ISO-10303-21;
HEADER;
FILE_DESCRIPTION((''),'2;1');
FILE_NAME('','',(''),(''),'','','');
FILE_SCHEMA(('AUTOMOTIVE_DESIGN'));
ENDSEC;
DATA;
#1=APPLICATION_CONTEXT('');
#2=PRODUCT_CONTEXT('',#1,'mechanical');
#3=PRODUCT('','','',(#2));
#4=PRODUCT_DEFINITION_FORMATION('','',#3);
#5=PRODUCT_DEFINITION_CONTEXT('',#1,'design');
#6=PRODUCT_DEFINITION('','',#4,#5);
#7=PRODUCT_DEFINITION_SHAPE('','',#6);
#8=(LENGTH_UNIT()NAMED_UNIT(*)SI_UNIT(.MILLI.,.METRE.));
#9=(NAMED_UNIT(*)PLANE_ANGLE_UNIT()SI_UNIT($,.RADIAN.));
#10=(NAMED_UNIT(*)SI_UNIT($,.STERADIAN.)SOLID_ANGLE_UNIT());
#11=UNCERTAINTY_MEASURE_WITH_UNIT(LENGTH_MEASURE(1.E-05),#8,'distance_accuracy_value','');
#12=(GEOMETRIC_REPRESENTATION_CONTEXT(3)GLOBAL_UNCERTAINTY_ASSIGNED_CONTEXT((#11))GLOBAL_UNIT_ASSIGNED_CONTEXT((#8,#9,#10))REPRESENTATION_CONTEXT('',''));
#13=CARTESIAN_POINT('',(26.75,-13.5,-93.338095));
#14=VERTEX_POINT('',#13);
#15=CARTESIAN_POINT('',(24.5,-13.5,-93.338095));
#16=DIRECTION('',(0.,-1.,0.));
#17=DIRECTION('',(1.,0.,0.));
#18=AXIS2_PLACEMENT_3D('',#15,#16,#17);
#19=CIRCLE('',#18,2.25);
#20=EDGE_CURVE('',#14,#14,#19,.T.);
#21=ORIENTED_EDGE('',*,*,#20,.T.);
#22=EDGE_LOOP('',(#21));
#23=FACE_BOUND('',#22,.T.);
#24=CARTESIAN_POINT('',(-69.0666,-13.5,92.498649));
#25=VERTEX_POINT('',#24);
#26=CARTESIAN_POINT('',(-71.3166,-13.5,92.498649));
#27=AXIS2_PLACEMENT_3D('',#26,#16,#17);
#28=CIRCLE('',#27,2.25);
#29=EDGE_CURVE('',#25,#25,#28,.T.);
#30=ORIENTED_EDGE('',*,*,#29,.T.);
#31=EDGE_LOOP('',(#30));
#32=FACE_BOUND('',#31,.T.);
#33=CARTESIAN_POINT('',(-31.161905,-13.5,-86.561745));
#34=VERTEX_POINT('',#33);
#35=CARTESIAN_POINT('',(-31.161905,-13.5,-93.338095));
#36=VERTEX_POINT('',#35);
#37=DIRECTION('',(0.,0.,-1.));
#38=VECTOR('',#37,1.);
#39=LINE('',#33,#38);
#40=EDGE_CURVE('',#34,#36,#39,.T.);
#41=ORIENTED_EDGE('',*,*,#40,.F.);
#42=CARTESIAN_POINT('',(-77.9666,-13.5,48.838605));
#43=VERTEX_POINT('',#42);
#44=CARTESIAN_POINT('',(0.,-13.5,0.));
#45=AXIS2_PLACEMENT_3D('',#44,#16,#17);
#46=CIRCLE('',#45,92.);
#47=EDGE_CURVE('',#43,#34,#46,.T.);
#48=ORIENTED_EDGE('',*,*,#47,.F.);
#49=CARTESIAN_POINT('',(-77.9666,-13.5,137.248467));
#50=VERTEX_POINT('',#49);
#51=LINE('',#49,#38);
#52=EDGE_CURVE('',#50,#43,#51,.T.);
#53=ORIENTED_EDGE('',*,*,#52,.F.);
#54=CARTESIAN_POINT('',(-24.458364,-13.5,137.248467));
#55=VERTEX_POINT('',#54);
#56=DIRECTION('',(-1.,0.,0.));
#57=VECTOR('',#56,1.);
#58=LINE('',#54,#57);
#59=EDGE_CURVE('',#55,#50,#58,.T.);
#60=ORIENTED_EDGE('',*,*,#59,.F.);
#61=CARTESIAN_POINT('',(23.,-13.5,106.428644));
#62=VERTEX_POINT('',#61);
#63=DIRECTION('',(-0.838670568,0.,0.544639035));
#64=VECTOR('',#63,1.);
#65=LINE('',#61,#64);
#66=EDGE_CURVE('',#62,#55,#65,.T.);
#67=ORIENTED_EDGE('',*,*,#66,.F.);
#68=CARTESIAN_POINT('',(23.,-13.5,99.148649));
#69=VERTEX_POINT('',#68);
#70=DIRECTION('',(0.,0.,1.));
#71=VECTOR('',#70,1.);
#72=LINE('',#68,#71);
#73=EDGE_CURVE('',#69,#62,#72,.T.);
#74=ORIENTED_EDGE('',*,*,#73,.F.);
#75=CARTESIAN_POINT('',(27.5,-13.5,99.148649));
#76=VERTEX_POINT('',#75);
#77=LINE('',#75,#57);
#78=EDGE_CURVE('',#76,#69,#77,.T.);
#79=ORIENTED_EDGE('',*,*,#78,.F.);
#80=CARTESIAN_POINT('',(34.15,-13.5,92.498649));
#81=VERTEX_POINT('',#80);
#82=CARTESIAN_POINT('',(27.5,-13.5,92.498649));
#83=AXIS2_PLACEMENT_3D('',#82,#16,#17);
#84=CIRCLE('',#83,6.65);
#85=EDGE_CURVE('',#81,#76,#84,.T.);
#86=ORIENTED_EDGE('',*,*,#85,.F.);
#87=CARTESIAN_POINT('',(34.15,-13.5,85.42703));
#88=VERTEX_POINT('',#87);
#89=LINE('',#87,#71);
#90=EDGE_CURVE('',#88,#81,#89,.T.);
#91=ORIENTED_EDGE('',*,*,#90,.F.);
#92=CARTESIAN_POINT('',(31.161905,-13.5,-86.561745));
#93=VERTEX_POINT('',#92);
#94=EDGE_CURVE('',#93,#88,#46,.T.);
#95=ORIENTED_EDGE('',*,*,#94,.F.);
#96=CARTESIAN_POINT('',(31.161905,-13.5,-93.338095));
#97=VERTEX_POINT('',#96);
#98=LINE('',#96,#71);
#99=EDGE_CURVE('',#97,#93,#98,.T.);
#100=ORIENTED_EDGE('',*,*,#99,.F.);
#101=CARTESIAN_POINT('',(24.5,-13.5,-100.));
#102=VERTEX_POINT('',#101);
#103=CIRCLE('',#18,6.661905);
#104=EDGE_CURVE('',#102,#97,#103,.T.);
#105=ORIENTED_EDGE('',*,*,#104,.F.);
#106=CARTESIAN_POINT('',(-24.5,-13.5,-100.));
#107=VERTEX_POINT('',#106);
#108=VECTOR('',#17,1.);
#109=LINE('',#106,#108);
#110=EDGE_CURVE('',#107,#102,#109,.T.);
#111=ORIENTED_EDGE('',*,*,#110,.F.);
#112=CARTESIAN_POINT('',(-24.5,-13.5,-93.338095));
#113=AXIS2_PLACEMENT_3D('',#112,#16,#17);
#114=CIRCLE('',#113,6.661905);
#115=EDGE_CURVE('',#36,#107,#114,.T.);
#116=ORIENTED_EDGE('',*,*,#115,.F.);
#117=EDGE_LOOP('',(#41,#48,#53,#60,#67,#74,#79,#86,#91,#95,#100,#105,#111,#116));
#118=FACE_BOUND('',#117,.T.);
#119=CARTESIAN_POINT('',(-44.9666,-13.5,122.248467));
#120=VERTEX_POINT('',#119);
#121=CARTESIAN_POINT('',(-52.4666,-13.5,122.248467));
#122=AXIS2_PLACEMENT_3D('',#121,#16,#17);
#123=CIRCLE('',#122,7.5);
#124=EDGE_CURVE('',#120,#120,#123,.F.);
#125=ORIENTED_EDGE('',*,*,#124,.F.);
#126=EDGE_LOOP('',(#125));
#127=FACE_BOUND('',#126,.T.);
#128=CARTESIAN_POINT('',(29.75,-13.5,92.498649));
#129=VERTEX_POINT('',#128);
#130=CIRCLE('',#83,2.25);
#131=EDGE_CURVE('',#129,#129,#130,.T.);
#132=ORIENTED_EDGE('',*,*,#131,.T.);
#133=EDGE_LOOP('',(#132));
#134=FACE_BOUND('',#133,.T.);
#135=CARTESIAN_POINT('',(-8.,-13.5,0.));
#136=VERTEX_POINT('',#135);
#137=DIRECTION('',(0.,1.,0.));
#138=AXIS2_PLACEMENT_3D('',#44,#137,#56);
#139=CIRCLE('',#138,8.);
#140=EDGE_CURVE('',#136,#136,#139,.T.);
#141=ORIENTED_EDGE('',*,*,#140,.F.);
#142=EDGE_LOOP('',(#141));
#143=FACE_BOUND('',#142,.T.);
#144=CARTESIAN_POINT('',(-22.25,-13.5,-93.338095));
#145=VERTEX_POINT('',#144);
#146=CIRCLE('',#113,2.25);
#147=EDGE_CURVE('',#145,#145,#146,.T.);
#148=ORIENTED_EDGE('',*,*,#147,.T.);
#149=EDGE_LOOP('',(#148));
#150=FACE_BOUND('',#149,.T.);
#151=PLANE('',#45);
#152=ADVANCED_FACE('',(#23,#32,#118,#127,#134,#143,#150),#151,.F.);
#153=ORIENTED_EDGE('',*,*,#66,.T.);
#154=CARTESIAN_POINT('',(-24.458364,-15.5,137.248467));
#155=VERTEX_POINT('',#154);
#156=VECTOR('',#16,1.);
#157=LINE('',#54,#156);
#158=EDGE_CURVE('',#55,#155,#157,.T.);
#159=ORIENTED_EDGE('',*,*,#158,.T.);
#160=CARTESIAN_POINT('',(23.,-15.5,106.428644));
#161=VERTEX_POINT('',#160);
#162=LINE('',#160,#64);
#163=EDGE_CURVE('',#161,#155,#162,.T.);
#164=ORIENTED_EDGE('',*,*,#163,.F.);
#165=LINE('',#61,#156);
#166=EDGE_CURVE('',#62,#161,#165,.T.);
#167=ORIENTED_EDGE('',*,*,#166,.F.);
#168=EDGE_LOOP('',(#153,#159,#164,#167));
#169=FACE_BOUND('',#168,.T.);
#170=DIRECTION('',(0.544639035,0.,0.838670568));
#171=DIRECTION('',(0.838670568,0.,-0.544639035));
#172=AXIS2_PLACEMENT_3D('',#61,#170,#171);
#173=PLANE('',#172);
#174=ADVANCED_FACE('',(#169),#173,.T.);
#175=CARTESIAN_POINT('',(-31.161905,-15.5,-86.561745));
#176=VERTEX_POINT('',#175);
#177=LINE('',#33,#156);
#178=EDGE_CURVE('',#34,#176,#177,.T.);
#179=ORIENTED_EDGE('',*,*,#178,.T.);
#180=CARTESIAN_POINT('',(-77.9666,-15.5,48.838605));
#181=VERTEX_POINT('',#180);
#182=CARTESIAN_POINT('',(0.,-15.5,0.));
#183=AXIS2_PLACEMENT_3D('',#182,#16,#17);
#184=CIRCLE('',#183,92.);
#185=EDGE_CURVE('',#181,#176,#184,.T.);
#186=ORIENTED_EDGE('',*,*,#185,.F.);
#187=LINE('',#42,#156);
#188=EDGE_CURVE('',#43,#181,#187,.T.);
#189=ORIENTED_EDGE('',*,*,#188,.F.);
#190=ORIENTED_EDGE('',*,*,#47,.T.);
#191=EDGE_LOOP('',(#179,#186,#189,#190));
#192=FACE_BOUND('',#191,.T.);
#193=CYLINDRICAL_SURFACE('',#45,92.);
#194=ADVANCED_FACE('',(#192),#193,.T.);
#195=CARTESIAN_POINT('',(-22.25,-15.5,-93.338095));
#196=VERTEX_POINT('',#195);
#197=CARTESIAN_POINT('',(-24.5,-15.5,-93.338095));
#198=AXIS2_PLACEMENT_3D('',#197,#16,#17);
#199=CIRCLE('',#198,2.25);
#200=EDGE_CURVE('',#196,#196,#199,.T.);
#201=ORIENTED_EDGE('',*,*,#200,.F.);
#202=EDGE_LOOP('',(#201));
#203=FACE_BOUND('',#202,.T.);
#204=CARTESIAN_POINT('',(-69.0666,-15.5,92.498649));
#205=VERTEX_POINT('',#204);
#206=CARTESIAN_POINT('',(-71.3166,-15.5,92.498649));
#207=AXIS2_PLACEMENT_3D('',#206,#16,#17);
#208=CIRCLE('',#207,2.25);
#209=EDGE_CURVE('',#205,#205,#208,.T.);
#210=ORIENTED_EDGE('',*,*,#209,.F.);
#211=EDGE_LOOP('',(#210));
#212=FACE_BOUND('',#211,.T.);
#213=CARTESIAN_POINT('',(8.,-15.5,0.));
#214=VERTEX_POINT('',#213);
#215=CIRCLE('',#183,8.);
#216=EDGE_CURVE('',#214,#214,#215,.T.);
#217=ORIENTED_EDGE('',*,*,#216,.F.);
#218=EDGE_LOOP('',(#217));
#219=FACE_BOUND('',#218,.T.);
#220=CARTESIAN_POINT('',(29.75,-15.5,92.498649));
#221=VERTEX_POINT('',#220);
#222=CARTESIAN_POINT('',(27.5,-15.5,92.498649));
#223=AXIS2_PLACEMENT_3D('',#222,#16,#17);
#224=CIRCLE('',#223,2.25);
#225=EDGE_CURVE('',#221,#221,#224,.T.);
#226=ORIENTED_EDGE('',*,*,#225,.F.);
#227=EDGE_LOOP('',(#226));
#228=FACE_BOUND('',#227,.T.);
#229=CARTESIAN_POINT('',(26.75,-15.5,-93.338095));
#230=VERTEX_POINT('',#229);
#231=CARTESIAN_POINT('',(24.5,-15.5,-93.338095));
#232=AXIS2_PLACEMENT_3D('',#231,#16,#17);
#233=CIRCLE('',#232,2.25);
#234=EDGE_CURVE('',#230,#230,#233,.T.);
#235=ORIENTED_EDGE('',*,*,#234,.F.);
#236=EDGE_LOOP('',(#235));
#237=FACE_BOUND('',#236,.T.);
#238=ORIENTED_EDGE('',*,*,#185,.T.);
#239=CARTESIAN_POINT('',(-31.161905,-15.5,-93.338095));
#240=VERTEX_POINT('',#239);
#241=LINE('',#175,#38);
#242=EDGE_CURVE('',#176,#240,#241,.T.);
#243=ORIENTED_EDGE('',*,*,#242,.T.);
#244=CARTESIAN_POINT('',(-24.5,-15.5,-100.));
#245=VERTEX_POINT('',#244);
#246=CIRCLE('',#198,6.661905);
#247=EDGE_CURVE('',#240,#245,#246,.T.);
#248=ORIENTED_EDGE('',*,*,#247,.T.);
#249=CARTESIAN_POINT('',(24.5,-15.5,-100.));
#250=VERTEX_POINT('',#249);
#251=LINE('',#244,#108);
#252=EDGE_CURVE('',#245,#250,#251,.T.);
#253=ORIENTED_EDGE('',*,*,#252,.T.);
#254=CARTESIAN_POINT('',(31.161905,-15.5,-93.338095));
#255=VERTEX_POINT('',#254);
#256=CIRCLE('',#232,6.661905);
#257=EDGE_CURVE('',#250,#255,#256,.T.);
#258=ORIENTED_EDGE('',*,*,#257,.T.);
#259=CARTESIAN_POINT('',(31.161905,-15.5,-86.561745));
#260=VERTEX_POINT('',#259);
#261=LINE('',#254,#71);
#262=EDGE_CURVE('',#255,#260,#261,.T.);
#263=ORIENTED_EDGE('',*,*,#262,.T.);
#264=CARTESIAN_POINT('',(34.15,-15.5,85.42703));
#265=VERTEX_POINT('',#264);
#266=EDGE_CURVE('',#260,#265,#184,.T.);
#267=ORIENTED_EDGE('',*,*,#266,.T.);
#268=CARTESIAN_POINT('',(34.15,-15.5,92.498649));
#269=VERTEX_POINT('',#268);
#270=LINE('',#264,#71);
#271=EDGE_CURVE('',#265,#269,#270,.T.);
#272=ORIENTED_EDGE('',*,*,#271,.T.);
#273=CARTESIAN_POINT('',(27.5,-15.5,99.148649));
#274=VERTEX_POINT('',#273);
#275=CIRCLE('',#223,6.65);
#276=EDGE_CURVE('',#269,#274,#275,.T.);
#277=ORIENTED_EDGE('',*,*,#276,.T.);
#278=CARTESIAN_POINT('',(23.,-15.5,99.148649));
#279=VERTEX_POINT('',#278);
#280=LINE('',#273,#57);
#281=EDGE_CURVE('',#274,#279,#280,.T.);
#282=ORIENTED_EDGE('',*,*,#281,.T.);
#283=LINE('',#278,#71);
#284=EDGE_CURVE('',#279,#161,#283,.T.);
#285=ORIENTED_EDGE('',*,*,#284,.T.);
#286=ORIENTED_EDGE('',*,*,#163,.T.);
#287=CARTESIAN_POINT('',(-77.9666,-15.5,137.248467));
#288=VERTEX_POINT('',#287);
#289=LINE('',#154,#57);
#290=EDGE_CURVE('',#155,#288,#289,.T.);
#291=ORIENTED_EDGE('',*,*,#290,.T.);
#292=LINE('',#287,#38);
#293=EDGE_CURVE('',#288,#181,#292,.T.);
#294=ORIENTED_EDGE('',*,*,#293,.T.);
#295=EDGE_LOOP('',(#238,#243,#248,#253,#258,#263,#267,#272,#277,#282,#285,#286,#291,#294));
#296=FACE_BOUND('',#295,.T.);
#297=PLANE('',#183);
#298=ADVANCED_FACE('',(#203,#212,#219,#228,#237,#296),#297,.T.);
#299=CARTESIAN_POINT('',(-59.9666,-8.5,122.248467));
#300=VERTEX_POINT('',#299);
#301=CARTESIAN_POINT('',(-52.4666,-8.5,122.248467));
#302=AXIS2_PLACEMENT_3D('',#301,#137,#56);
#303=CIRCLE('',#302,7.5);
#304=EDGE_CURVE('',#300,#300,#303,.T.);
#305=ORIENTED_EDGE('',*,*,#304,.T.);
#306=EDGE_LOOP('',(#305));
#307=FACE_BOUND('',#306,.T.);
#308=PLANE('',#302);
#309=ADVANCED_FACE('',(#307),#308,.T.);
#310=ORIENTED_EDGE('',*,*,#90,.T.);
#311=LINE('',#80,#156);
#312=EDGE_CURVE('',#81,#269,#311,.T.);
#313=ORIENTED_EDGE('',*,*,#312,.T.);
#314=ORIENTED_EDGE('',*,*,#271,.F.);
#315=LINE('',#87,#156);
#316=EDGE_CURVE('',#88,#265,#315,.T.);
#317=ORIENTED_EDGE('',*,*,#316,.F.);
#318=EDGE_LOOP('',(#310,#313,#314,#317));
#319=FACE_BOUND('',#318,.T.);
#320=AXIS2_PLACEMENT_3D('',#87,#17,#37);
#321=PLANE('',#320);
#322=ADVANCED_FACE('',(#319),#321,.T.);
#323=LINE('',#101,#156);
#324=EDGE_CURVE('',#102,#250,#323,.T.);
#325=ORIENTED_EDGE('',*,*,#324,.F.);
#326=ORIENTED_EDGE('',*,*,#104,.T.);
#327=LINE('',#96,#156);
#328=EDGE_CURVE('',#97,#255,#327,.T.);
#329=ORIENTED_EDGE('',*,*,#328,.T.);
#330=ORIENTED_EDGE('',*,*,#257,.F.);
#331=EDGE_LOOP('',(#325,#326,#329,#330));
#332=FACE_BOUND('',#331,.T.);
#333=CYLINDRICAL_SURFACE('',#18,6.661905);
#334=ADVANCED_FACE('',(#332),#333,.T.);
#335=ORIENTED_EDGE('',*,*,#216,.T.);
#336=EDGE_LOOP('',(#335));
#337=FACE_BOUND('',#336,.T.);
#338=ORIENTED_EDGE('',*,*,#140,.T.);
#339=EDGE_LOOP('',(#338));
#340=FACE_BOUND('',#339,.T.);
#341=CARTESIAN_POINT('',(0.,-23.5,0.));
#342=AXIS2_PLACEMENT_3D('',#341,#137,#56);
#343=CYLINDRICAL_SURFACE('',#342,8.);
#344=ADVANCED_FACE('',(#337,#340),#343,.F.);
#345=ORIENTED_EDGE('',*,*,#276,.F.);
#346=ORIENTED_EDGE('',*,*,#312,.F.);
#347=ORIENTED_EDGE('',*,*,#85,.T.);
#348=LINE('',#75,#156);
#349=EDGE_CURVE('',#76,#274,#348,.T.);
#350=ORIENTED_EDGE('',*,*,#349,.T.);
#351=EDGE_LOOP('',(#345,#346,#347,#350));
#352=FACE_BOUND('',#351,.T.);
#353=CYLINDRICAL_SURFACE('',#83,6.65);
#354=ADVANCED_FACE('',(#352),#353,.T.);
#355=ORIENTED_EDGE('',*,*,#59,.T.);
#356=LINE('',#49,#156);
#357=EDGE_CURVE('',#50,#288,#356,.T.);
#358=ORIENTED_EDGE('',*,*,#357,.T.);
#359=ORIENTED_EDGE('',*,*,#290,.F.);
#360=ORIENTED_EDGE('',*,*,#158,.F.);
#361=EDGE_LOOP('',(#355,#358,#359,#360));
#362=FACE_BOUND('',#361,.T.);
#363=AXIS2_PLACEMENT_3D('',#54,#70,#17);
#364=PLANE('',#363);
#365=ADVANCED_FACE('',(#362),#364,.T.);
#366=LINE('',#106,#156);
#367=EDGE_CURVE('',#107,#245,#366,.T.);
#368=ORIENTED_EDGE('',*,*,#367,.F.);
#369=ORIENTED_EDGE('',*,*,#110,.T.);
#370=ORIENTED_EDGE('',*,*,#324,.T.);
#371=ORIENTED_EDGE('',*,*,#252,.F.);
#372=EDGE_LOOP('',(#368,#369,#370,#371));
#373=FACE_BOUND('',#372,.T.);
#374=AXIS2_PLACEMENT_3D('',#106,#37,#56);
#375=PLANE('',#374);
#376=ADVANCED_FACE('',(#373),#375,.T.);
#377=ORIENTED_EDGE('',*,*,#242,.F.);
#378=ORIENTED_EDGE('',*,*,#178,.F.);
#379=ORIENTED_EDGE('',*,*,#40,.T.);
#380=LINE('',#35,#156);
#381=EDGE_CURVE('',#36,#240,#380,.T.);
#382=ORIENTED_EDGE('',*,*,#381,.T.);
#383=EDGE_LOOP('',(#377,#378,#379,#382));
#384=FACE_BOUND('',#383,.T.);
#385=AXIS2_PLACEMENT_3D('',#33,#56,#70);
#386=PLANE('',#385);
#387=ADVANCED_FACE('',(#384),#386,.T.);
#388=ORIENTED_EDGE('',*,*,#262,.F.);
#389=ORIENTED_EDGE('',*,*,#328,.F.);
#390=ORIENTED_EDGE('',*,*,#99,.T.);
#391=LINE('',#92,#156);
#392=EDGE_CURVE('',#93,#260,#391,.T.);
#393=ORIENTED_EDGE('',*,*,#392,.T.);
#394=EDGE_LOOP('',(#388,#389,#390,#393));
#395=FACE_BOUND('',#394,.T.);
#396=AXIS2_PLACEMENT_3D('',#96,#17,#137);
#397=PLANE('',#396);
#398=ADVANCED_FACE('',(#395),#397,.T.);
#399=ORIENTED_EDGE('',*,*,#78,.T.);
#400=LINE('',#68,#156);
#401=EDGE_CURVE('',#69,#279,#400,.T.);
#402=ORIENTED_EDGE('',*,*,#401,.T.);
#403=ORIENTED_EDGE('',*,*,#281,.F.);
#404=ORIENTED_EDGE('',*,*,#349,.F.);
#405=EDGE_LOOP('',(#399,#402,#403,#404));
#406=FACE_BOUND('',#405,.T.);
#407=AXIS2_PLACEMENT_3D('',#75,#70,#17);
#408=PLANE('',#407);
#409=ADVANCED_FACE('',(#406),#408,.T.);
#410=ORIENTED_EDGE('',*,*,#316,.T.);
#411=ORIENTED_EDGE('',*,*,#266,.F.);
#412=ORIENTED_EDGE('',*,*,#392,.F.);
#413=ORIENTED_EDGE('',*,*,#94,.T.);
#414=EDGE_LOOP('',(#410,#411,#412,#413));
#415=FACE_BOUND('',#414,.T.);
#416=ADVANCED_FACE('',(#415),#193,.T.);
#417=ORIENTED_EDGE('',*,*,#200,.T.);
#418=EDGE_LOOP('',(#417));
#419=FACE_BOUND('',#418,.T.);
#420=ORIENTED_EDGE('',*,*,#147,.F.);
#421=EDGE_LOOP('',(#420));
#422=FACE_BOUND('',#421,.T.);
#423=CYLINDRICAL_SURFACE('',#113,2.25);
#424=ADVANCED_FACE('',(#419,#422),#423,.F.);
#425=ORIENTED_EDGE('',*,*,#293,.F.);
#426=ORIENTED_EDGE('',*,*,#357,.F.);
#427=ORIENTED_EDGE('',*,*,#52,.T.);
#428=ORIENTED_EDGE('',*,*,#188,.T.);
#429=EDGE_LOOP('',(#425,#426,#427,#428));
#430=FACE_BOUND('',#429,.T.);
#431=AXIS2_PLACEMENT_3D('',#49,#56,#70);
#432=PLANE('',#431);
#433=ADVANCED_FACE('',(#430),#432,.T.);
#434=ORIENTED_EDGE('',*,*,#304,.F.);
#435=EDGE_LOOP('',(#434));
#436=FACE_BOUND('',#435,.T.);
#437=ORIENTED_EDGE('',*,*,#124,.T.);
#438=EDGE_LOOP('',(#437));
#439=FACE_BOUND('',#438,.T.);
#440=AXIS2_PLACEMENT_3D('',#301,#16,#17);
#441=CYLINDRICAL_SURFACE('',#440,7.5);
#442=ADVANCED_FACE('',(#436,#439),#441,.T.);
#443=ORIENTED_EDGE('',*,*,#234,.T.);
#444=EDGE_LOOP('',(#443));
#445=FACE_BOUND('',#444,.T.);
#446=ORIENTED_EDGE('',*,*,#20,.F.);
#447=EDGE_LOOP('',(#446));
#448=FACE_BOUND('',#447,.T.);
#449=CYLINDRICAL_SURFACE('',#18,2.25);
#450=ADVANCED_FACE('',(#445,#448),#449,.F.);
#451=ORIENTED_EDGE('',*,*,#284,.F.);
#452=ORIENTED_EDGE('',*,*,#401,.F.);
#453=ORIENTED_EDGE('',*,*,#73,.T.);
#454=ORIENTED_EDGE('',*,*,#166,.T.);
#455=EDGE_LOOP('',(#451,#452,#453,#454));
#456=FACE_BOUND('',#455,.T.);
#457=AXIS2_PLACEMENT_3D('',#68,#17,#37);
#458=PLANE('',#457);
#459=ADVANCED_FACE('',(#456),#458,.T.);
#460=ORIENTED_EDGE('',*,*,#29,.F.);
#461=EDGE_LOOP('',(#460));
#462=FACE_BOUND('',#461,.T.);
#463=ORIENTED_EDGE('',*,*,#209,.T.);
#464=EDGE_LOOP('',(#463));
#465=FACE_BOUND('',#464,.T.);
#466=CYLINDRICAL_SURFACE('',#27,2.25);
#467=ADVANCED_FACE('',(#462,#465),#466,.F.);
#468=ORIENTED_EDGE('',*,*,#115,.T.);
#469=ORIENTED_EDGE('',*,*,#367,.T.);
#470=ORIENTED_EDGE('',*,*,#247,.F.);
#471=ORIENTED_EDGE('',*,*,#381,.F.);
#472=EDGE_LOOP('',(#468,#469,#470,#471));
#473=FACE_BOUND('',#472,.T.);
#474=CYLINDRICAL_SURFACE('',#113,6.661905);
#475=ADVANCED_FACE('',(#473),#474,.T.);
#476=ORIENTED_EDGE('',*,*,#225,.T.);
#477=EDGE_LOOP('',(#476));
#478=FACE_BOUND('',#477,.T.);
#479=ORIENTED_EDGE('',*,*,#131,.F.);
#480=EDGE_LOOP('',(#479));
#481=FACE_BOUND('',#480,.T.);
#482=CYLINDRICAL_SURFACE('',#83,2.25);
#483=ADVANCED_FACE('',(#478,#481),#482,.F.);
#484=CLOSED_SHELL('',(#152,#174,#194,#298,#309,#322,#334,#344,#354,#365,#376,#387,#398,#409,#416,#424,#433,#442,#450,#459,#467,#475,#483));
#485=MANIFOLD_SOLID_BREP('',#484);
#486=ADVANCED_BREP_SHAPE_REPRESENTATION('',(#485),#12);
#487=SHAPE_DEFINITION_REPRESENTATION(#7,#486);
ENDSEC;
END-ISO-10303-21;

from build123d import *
from build123d.topology import SkipClean

# Parameters (mm, degrees)
SALIENTE_EXTRUIR1_DEPTH                   = 12.5
SALIENTE_EXTRUIR1_2_DEPTH                 = 12.5
CROQUIS4_R                                = 92
CROQUIS4_R_2                              = 17.5
SALIENTE_EXTRUIR3_DEPTH                   = 3
CROQUIS5_W                                = 42.3
CROQUIS5_H                                = 42.3
CROQUIS5_R                                = 19
CROQUIS5_R_2                              = 1.5
SALIENTE_EXTRUIR4_DEPTH                   = 10
CHAFL_N1_SIZE                             = 4
CROQUIS7_W                                = 46.3
CROQUIS7_H                                = 3
SALIENTE_EXTRUIR5_DEPTH                   = 70
SALIENTE_EXTRUIR7_START                   = -3.5
SALIENTE_EXTRUIR7_DEPTH                   = 7
CROQUIS15_W                               = 46.3
CROQUIS15_H                               = 2
SALIENTE_EXTRUIR8_DEPTH                   = 42.3
SALIENTE_EXTRUIR9_START                   = 21.15
SALIENTE_EXTRUIR9_DEPTH                   = 2
SALIENTE_EXTRUIR10_START                  = -15.5
SALIENTE_EXTRUIR10_DEPTH                  = 6
SALIENTE_EXTRUIR10_START_2                = -9.5
SALIENTE_EXTRUIR10_2_DEPTH                = 22
CROQUIS20_R                               = 2
SALIENTE_EXTRUIR11_DEPTH                  = 28
CORTAR_EXTRUIR2_DEPTH                     = 3.3
SALIENTE_EXTRUIR30_DEPTH                  = 3
SALIENTE_EXTRUIR27_REACH                  = 245.062
SALIENTE_EXTRUIR27_END_RADIUS             = 92
CROQUIS60_W                               = 3
CROQUIS60_H                               = 28
SALIENTE_EXTRUIR27_DIRECTION_2_REACH      = 245.062
SALIENTE_EXTRUIR28_START                  = 89.078617
CROQUIS61_W                               = 3
CROQUIS61_H                               = 28
SALIENTE_EXTRUIR28_DEPTH                  = 15.72116
SALIENTE_EXTRUIR32_DEPTH                  = 3
SALIENTE_EXTRUIR33_DEPTH                  = 3
SALIENTE_EXTRUIR34_DEPTH                  = 25
REDONDEO9_R                               = 5
REDONDEO10_R                              = 4
CORTAR_EXTRUIR6_OUTLINE_W                 = 2.65
CORTAR_EXTRUIR6_OUTLINE_H                 = 6.147817537
CROQUIS32_R                               = 3.65
CROQUIS32_R_2                             = 2.65
SALIENTE_EXTRUIR16_DEPTH                  = 5.5
SALIENTE_EXTRUIR16_DIRECTION_2_REACH      = 234.007
SALIENTE_EXTRUIR16_DIRECTION_2_END_RADIUS = 92
CORTAR_EXTRUIR21_OUTLINE_W                = 2.65
CORTAR_EXTRUIR21_OUTLINE_H                = 6.147460621
CROQUIS70_R                               = 3.65
CROQUIS70_R_2                             = 2.65
SALIENTE_EXTRUIR36_DEPTH                  = 5.5
SALIENTE_EXTRUIR36_DIRECTION_2_REACH      = 241.136
SALIENTE_EXTRUIR36_DIRECTION_2_END_RADIUS = 92
CROQUIS35_R                               = 3.5
CORTAR_EXTRUIR8_DEPTH                     = 3
CROQUIS37_R                               = 6
CROQUIS37_R_2                             = 2
SALIENTE_EXTRUIR18_DEPTH                  = 3
CORTAR_EXTRUIR10_DEPTH                    = 3
CORTAR_EXTRUIR10_DEPTH_BACK               = 3
CROQUIS41_R                               = 3.5
CROQUIS44_R                               = 5
CORTAR_EXTRUIR12_DEPTH                    = 3
CROQUIS42_R                               = 6
CROQUIS42_R_2                             = 2
SALIENTE_EXTRUIR20_DEPTH                  = 3.3
CORTAR_EXTRUIR14_REACH                    = 189.797
SALIENTE_EXTRUIR22_DEPTH                  = 3.3
SALIENTE_EXTRUIR23_DEPTH                  = 5
CORTAR_EXTRUIR15_DEPTH                    = 3.3
SIMETR_A11_START                          = -18.8
SIMETR_A11_DEPTH                          = 3.3
SIMETR_A11_START_2                        = -23.8
SIMETR_A11_2_DEPTH                        = 5
SIMETR_A11_START_3                        = -20.5
SIMETR_A11_3_DEPTH                        = 1.7
SALIENTE_EXTRUIR24_DEPTH                  = 3.3
CROQUIS53_R                               = 8
SALIENTE_EXTRUIR25_DEPTH                  = 5
CORTAR_EXTRUIR16_DEPTH                    = 3.3
CROQUIS55_R                               = 2
CORTAR_EXTRUIR18_DEPTH                    = 181.493683415
CORTAR_EXTRUIR19_REACH                    = 228.145
CORTAR_EXTRUIR19_END_RADIUS               = 89
CROQUIS56_W                               = 15
CROQUIS56_H                               = 10
CROQUIS69_R                               = 2
SALIENTE_EXTRUIR35_DEPTH                  = 28
SALIENTE_EXTRUIR37_DEPTH                  = 28
SALIENTE_EXTRUIR38_DEPTH                  = 2
SALIENTE_EXTRUIR39_START                  = -2
SALIENTE_EXTRUIR39_DEPTH                  = 2
SALIENTE_EXTRUIR40_DEPTH                  = 26
CROQUIS74_R                               = 2
CORTAR_EXTRUIR22_DEPTH                    = 170.285734049
CORTAR_EXTRUIR23_DEPTH                    = 3.3
CROQUIS79_R                               = 2.25
SALIENTE_EXTRUIR41_DEPTH                  = 2
CROQUIS81_R                               = 7.5
SALIENTE_EXTRUIR43_DEPTH                  = 5
CROQUIS82_R                               = 8
CORTAR_EXTRUIR24_DEPTH                    = 10


# Read off the part's stored shape, not the designer's step: Saliente-Extruir7, Saliente-Extruir9, Saliente-Extruir10, Cortar-Extruir6, Cortar-Extruir21, Simetría11
with BuildPart() as part:
    # Croquis1 → Saliente-Extruir1 (new, symmetric)
    with BuildSketch(Plane(origin=(0, 0, 0), x_dir=(1, 0, 0), z_dir=(0, 1, 0))):
        with BuildLine():
            Line((-17, 87.361318671), (-17, 90.4157066))
            ThreePointArc((-17, 90.4157066), (-90.786182549, 14.895269658), (-45, -80.243379789))
            Line((-45, -80.243379789), (-45, -76.785415282))
            ThreePointArc((-45, -76.785415282), (-87.732762221, 14.965374473), (-17, 87.361318671))
        make_face()
    extrude(amount=SALIENTE_EXTRUIR1_DEPTH, both=True)



with BuildPart() as body_2:
    # Croquis1 → Saliente-Extruir1 2 (new, symmetric)
    with BuildSketch(Plane(origin=(0, 0, 0), x_dir=(1, 0, 0), z_dir=(0, 1, 0))):
        with BuildLine():
            ThreePointArc((20, -89.799777283), (91.987255409, 1.531287769), (17, 90.4157066))
            Line((17, 90.4157066), (17, 87.361318671))
            ThreePointArc((17, 87.361318671), (88.986787561, 1.533505674), (20, -86.723699183))
            Line((20, -86.723699183), (20, -89.799777283))
        make_face()
    extrude(amount=SALIENTE_EXTRUIR1_2_DEPTH, both=True)


with BuildPart() as body_3:
    # Croquis4 → Saliente-Extruir3 (new body)
    with BuildSketch(Plane.XZ.offset(12.5)):
        with Locations(Location((0, 0, 0), (0, 0, 270))):
            Circle(CROQUIS4_R)
        with Locations(Location((0, 0, 0), (0, 0, 270))):
            Circle(CROQUIS4_R_2, mode=Mode.SUBTRACT)
    extrude(amount=SALIENTE_EXTRUIR3_DEPTH)


with BuildPart() as body_4:
    # Croquis5 → Saliente-Extruir4 (new body)
    with BuildSketch(Plane(origin=(0, -15.5, 0), x_dir=(-1, 0, 0), z_dir=(0, -1, 0))):
        Rectangle(CROQUIS5_W, CROQUIS5_H)
        with Locations(Location((0, 0, 0), (0, 0, 90))):
            Circle(CROQUIS5_R, mode=Mode.SUBTRACT)
        with Locations(Location((-15.5, -15.5, 0), (0, 0, 90))):
            Circle(CROQUIS5_R_2, mode=Mode.SUBTRACT)
        with Locations(Location((15.5, -15.5, 0), (0, 0, 270))):
            Circle(CROQUIS5_R_2, mode=Mode.SUBTRACT)
        with Locations(Location((-15.5, 15.5, 0), (0, 0, 270))):
            Circle(CROQUIS5_R_2, mode=Mode.SUBTRACT)
        with Locations(Location((15.5, 15.5, 0), (0, 0, 90))):
            Circle(CROQUIS5_R_2, mode=Mode.SUBTRACT)
    extrude(amount=SALIENTE_EXTRUIR4_DEPTH)

    # Chaflán1
    chafl_n1_edges = [body_4.edges().sort_by_distance(p)[0] for p in [
        (-21.15, -20.5, 21.15),
        (21.15, -20.5, 21.15),
        (21.15, -20.5, -21.15),
        (-21.15, -20.5, -21.15),
    ]]
    chamfer(chafl_n1_edges, length=CHAFL_N1_SIZE)


with BuildPart() as body_4_2:
    # Croquis7 → Saliente-Extruir5 (new body)
    with BuildSketch(Plane.XZ.offset(15.5)):
        with Locations((0, 22.65)):
            Rectangle(CROQUIS7_W, CROQUIS7_H)
    extrude(amount=SALIENTE_EXTRUIR5_DEPTH)


with BuildPart() as body_5:
    # Saliente-Extruir7 outline → Saliente-Extruir7 (new body)
    with BuildSketch(Plane.YZ.offset(SALIENTE_EXTRUIR7_START)):
        Polygon((-15.5, 73.164527675), (-85.5, 24.15), (-15.5, 24.15), align=None)
    extrude(amount=SALIENTE_EXTRUIR7_DEPTH)

    # Croquis44 → Cortar-Extruir12 (cut)
    with BuildSketch(Plane.XZ.offset(15.5)):
        with Locations((0, 73.164527675)):
            Circle(CROQUIS44_R)
    extrude(amount=CORTAR_EXTRUIR12_DEPTH, mode=Mode.SUBTRACT)

    # Croquis42 → Saliente-Extruir20 (add)
    with BuildSketch(Plane.XZ.offset(15.5)):
        with Locations((0, 73.164527675)):
            Circle(CROQUIS42_R)
        with Locations((0, 73.164527675)):
            Circle(CROQUIS42_R_2, mode=Mode.SUBTRACT)
    extrude(amount=SALIENTE_EXTRUIR20_DEPTH)

    # Cortar-Extruir14: up to this face of the body (flat: up to its plane)
    cortar_extruir14_end = Plane(body_5.part.faces().sort_by_distance((-3.5, -38.990764188, 40.274069561))[0])
    # Croquis45 → Cortar-Extruir14 (cut, up to the picked face)
    with BuildSketch(Plane(origin=(3.5, 0, 0), x_dir=(0, 0, -1), z_dir=(1, 0, 0)), mode=Mode.PRIVATE) as cortar_extruir14_sk1:
        Polygon((-70.853842799, -18.95), (-68.141130502, -18.95), (-68.141130502, -15.5), (-68.291130502, -15.5), (-68.291130502, -18.8), (-70.853842799, -18.8), align=None)
    cortar_extruir14_tool1 = split(extrude(cortar_extruir14_sk1.sketch, amount=-CORTAR_EXTRUIR14_REACH, mode=Mode.PRIVATE), bisect_by=cortar_extruir14_end, keep=Keep.BOTH, mode=Mode.PRIVATE)
    add(cortar_extruir14_tool1.solids().sort_by(Axis((3.5, -18.906112, 69.497487), (-1, 0, 0)))[0], mode=Mode.SUBTRACT)


with BuildPart() as body_6:
    # Croquis15 → Saliente-Extruir8 (new body)
    with BuildSketch(Plane(origin=(0, 0, 21.15), x_dir=(-1, 0, 0), z_dir=(0, 0, -1))):
        with Locations((0, -84.5)):
            Rectangle(CROQUIS15_W, CROQUIS15_H)
    extrude(amount=SALIENTE_EXTRUIR8_DEPTH)


with BuildPart() as body_7:
    # Saliente-Extruir9 outline → Saliente-Extruir9 (new body)
    with BuildSketch(Plane.YZ.offset(SALIENTE_EXTRUIR9_START)):
        Polygon((-53.5, 21.15), (-83.5, 21.15), (-83.5, -8.85), align=None)
    extrude(amount=SALIENTE_EXTRUIR9_DEPTH)


with BuildPart() as body_8:
    # Simetría10: mirrored copy
    add(body_7.part.mirror(Plane(origin=(0, 0, 0), x_dir=(0, 0, 1), z_dir=(1, 0, 0))))


with BuildPart() as part_1:
    add(part.part)

    add(body_2.part)  # Saliente-Extruir10 merges body 2

    add(body_3.part)  # Saliente-Extruir10 merges body 3
    # Saliente-Extruir10 outline → Saliente-Extruir10 (add)
    with BuildSketch(Plane(origin=(0, 0, 0), x_dir=(1, 0, 0), z_dir=(0, 1, 0)).offset(SALIENTE_EXTRUIR10_START)):
        with BuildLine():
            Line((-20, 100), (-20, 89.799777282))
            ThreePointArc((-20, 89.799777282), (-18.502563126, 90.12022613), (-17, 90.4157066))
            ThreePointArc((-17, 90.4157066), (0, 92), (17, 90.4157066))
            ThreePointArc((17, 90.4157066), (18.502563126, 90.12022613), (20, 89.799777283))
            Line((20, 89.799777283), (20, 100))
            Line((20, 100), (-20, 100))
        make_face()
    extrude(amount=SALIENTE_EXTRUIR10_DEPTH)

    # Saliente-Extruir10 2 outline → Saliente-Extruir10 2 (add)
    with SkipClean():  # the faces are left unmerged after this step: merging them gives an invalid solid
        with BuildSketch(Plane(origin=(0, 0, 0), x_dir=(1, 0, 0), z_dir=(0, 1, 0)).offset(SALIENTE_EXTRUIR10_START_2)):
            with BuildLine():
                ThreePointArc((-20, 89.799777282), (-18.502563126, 90.12022613), (-17, 90.4157066))
                Line((-17, 90.4157066), (-17, 100))
                Line((-17, 100), (-20, 100))
                Line((-20, 100), (-20, 89.799777282))
            make_face()
            with BuildLine():
                Line((17, 100), (17, 90.4157066))
                ThreePointArc((17, 90.4157066), (18.502563126, 90.12022613), (20, 89.799777283))
                Line((20, 89.799777283), (20, 100))
                Line((20, 100), (17, 100))
            make_face()
        extrude(amount=SALIENTE_EXTRUIR10_2_DEPTH)

    # Croquis20 → Saliente-Extruir11 (add)
    with SkipClean():  # the faces are left unmerged after this step: merging them gives an invalid solid
        with BuildSketch(Plane(origin=(0, 12.5, 0), x_dir=(1, 0, 0), z_dir=(0, 1, 0))):
            with BuildLine():
                Line((-20, 100), (-24.5, 100))
                ThreePointArc((-24.5, 100), (-29.210678119, 98.048773235), (-31.161904883, 93.338095117))
                Line((-31.161904883, 93.338095117), (-31.161904883, 86.561744923))
                ThreePointArc((-31.161904883, 86.561744923), (-25.632134933, 88.357193588), (-20, 89.799777283))
                Line((-20, 89.799777283), (-20, 100))
            make_face()
            with Locations(Location((-24.5, 93.338095117, 0), (0, 0, 270))):
                Circle(CROQUIS20_R, mode=Mode.SUBTRACT)
        saliente_extruir11 = extrude(amount=-SALIENTE_EXTRUIR11_DEPTH)

    # Simetría2: Saliente-Extruir11 across plane
    with SkipClean():  # the faces are left unmerged after this step: merging them gives an invalid solid
        add(saliente_extruir11.mirror(Plane(origin=(0, 0, 0), x_dir=(0, 0, 1), z_dir=(1, 0, 0))))

    # Croquis22 → Cortar-Extruir2 (cut)
    with SkipClean():  # the faces are left unmerged after this step: merging them gives an invalid solid
        with BuildSketch(Plane.XZ.offset(15.5)):
            Polygon((22.479274058, -89.838095117), (26.520725942, -89.838095117), (28.541451884, -93.338095117), (26.520725942, -96.838095117), (22.479274058, -96.838095117), (20.458548116, -93.338095117), align=None)
            Polygon((-26.520725942, -89.838095117), (-28.541451884, -93.338095117), (-26.520725942, -96.838095117), (-22.479274058, -96.838095117), (-20.458548116, -93.338095117), (-22.479274058, -89.838095117), align=None)
        extrude(amount=-CORTAR_EXTRUIR2_DEPTH, mode=Mode.SUBTRACT)

    # Croquis65 → Saliente-Extruir30 (add)
    with BuildSketch(Plane(origin=(0, -12.5, 0), x_dir=(1, 0, 0), z_dir=(0, 1, 0))):
        with BuildLine():
            Line((-45, -80.243379789), (-73.381594056, -104.799777283))
            Line((-73.381594056, -104.799777283), (20, -104.799777283))
            Line((20, -104.799777283), (20, -89.799777283))
            ThreePointArc((20, -89.799777283), (-13.382121777, -91.021529413), (-45, -80.243379789))
        make_face()
    extrude(amount=-SALIENTE_EXTRUIR30_DEPTH)

    # Saliente-Extruir27: up to this cylinder (the profile starts outside it)
    saliente_extruir27_end = Plane(origin=(0, -1.5, 0), z_dir=(0, -1, 0)) * Cylinder(SALIENTE_EXTRUIR27_END_RADIUS, 675.124, mode=Mode.PRIVATE)
    # Croquis60 → Saliente-Extruir27 (add, up to the surface)
    with BuildSketch(Plane(origin=(-69.573094964, 0, 60.196216302), x_dir=(-0.6543066989345575, 0, -0.7562292930912968), z_dir=(0.7562292930912968, 0, -0.6543066989345575)), mode=Mode.PRIVATE) as saliente_extruir27_sk1:
        with Locations((-29.738592921, -1.5)):
            Rectangle(CROQUIS60_W, CROQUIS60_H)
    saliente_extruir27_tool1 = extrude(saliente_extruir27_sk1.sketch, amount=SALIENTE_EXTRUIR27_REACH, mode=Mode.PRIVATE) - saliente_extruir27_end
    add(saliente_extruir27_tool1.solids().sort_by_distance((-50.114934, -1.5, 82.685411))[0])

    # Saliente-Extruir27 direction 2: up to this plane
    saliente_extruir27_direction_2_end = Plane(origin=(-73.381594056, -112.056401995, 104.799777283), z_dir=(0, 0, 1))
    # Croquis60 → Saliente-Extruir27 direction 2 (add, up to the surface)
    with BuildSketch(Plane(origin=(-69.573094964, 0, 60.196216302), x_dir=(-0.6543066989345575, 0, -0.7562292930912968), z_dir=(0.7562292930912968, 0, -0.6543066989345575)), mode=Mode.PRIVATE) as saliente_extruir27_direction_2_sk1:
        with Locations((-29.738592921, -1.5)):
            Rectangle(CROQUIS60_W, CROQUIS60_H)
    saliente_extruir27_direction_2_tool1 = split(extrude(saliente_extruir27_direction_2_sk1.sketch, amount=-SALIENTE_EXTRUIR27_DIRECTION_2_REACH, mode=Mode.PRIVATE), bisect_by=saliente_extruir27_direction_2_end, keep=Keep.BOTH, mode=Mode.PRIVATE)
    add(saliente_extruir27_direction_2_tool1.solids().sort_by_distance((-50.114934, -1.5, 82.685411))[0])

    # Croquis61 → Saliente-Extruir28 (add)
    with BuildSketch(Plane.XY.offset(SALIENTE_EXTRUIR28_START)):
        with Locations((21.5, -1.5)):
            Rectangle(CROQUIS61_W, CROQUIS61_H)
    extrude(amount=SALIENTE_EXTRUIR28_DEPTH)

    # Croquis66 → Saliente-Extruir32 (add)
    with BuildSketch(Plane(origin=(0, -12.5, 0), x_dir=(1, 0, 0), z_dir=(0, 1, 0))):
        Polygon((-74.966599841, -104.799777283), (-74.966599841, -119.799777283), (-3.097974457, -119.799777283), (20, -104.799777283), align=None)
    extrude(amount=-SALIENTE_EXTRUIR32_DEPTH)

    # Croquis67 → Saliente-Extruir33 (add)
    with BuildSketch(Plane(origin=(0, -12.5, 0), x_dir=(1, 0, 0), z_dir=(0, 1, 0))):
        Polygon((20, -104.799777283), (23, -104.799777283), (23, -106.428644381), (-24.458364465, -137.248466626), (-29.966599841, -137.248466626), (-77.966599841, -137.248466626), (-77.966599841, -104.799777283), (-74.966599841, -104.799777283), (-74.966599841, -119.799777283), (-3.097974457, -119.799777283), align=None)
    extrude(amount=-SALIENTE_EXTRUIR33_DEPTH)

    # Croquis68 → Saliente-Extruir34 (add)
    with BuildSketch(Plane(origin=(0, -12.5, 0), x_dir=(1, 0, 0), z_dir=(0, 1, 0))):
        Polygon((-74.966599841, -106.171160159), (-74.966599841, -137.248466626), (-77.966599841, -137.248466626), (-77.966599841, -104.799777283), (-73.381594056, -104.799777283), align=None)
        Polygon((20, -104.799777283), (-29.966599841, -137.248466626), (-24.458364465, -137.248466626), (23, -106.428644381), (23, -104.799777283), align=None)
    extrude(amount=SALIENTE_EXTRUIR34_DEPTH)

    # Redondeo9
    # the kernel refuses this fillet: 5 mm, written as the material it takes off along each edge
    with BuildSketch(Plane(origin=(-45, -12.5, 80.243379789), x_dir=(0, 0, -1), z_dir=(0, 1, 0))) as redondeo9_piece_1:
        with BuildLine():
            CenterArc((REDONDEO9_R * 0.457127625475, REDONDEO9_R), REDONDEO9_R, 220.867101081, 49.132898919)
            Line((-REDONDEO9_R * 0.299101667616, REDONDEO9_R * 0.345693301065), (0, 0))
            Line((0, 0), (REDONDEO9_R * 0.457127625475, 0))
        make_face()
    extrude(amount=30.714095318, mode=Mode.SUBTRACT)
    with BuildSketch(Plane(origin=(-45, 19.533949217, 76.785415282), x_dir=(-0.8548787678181875, 0, -0.518827806052892), z_dir=(0, -1, 0))) as redondeo9_piece_2:
        with BuildLine():
            CenterArc((2.814630463, -4.999408566), REDONDEO9_R, 90.88127216, 57.865071996)
            Line((-1.459763376, -2.405269536), (0, 0))
            ThreePointArc((0, 0), (1.368863996, -0.010527525), (2.737727991, 0))
        make_face()
    extrude(amount=32.033949217, mode=Mode.SUBTRACT)

    # Redondeo10
    redondeo10_edges = [part_1.edges().sort_by_distance(p)[0] for p in [
        (20, 0, 86.723699183),
    ]]
    fillet(redondeo10_edges, radius=REDONDEO10_R)

    # Cortar-Extruir6 outline → Cortar-Extruir6 (revolve, cut)
    with BuildSketch(Plane(origin=(7.255228308, 0, 41.146444401), x_dir=(0, 1, 0), z_dir=(-0.17364817766693907, 0, -0.9848077530122066))):
        with Locations((1.325, 80.189494924)):
            Rectangle(CORTAR_EXTRUIR6_OUTLINE_W, CORTAR_EXTRUIR6_OUTLINE_H)
    revolve(axis=Axis((7.255228308, 0, 41.146444401), (0.9848077530122066, 0, -0.17364817766693907)), mode=Mode.SUBTRACT)

    # Croquis32 → Saliente-Extruir16 (add)
    with BuildSketch(Plane(origin=(87.975419613, -12.5, 26.913296786), x_dir=(-0.17364817766693919, 0, -0.9848077530122067), z_dir=(0.9848077530122067, 0, -0.17364817766693919))):
        with Locations((0, 12.5)):
            Circle(CROQUIS32_R)
        with Locations((0, 12.5)):
            Circle(CROQUIS32_R_2, mode=Mode.SUBTRACT)
    extrude(amount=SALIENTE_EXTRUIR16_DEPTH)

    # Saliente-Extruir16 direction 2: up to this cylinder (the profile starts outside it)
    saliente_extruir16_direction_2_end = Plane(origin=(0, 0, 0), z_dir=(0, -1, 0)) * Cylinder(SALIENTE_EXTRUIR16_DIRECTION_2_END_RADIUS, 653.014, mode=Mode.PRIVATE)
    # Croquis32 → Saliente-Extruir16 direction 2 (add, up to the surface)
    with BuildSketch(Plane(origin=(87.975419613, -12.5, 26.913296786), x_dir=(-0.17364817766693919, 0, -0.9848077530122067), z_dir=(0.9848077530122067, 0, -0.17364817766693919)), mode=Mode.PRIVATE) as saliente_extruir16_direction_2_sk1:
        with Locations((0, 12.5)):
            Circle(CROQUIS32_R)
        with Locations((0, 12.5)):
            Circle(CROQUIS32_R_2, mode=Mode.SUBTRACT)
    saliente_extruir16_direction_2_tool1 = extrude(saliente_extruir16_direction_2_sk1.sketch, amount=-SALIENTE_EXTRUIR16_DIRECTION_2_REACH, mode=Mode.PRIVATE) - saliente_extruir16_direction_2_end
    add(saliente_extruir16_direction_2_tool1.solids().sort_by_distance((88.591308, 0, 30.406176))[0])

    # Cortar-Extruir21 outline → Cortar-Extruir21 (revolve, cut)
    with BuildSketch(Plane(origin=(39.261480281, 0, -14.290010176), x_dir=(0.9396926207859093, 0, -0.3420201433256662), z_dir=(0, -1, 0))):
        with Locations((1.325, 80.189673382)):
            Rectangle(CORTAR_EXTRUIR21_OUTLINE_W, CORTAR_EXTRUIR21_OUTLINE_H)
    revolve(axis=Axis((39.261480281, 0, -14.290010176), (0.3420201433256662, 0, 0.9396926207859093)), mode=Mode.SUBTRACT)

    # Croquis70 → Saliente-Extruir36 (add)
    with BuildSketch(Plane(origin=(67.295308523, -12.5, 62.7322999), x_dir=(0.9396926207859095, 0, -0.3420201433256657), z_dir=(0.3420201433256657, 0, 0.9396926207859095))):
        with Locations((0, 12.5)):
            Circle(CROQUIS70_R)
        with Locations((0, 12.5)):
            Circle(CROQUIS70_R_2, mode=Mode.SUBTRACT)
    extrude(amount=SALIENTE_EXTRUIR36_DEPTH)

    # Saliente-Extruir36 direction 2: up to this cylinder (the profile starts outside it)
    with SkipClean():  # the faces are left unmerged after this step: merging them gives an invalid solid
        saliente_extruir36_direction_2_end = Plane(origin=(0, 0, 0), z_dir=(0, -1, 0)) * Cylinder(SALIENTE_EXTRUIR36_DIRECTION_2_END_RADIUS, 667.272, mode=Mode.PRIVATE)
        # Croquis70 → Saliente-Extruir36 direction 2 (add, up to the surface)
        with BuildSketch(Plane(origin=(67.295308523, -12.5, 62.7322999), x_dir=(0.9396926207859095, 0, -0.3420201433256657), z_dir=(0.3420201433256657, 0, 0.9396926207859095)), mode=Mode.PRIVATE) as saliente_extruir36_direction_2_sk1:
            with Locations((0, 12.5)):
                Circle(CROQUIS70_R)
            with Locations((0, 12.5)):
                Circle(CROQUIS70_R_2, mode=Mode.SUBTRACT)
        saliente_extruir36_direction_2_tool1 = extrude(saliente_extruir36_direction_2_sk1.sketch, amount=-SALIENTE_EXTRUIR36_DIRECTION_2_REACH, mode=Mode.PRIVATE) - saliente_extruir36_direction_2_end
        add(saliente_extruir36_direction_2_tool1.solids().sort_by_distance((63.962442, 0, 63.945364))[0])

    # Croquis35 → Cortar-Extruir8 (cut)
    with BuildSketch(Plane.XZ.offset(15.5)):
        with Locations((-13.15, 30.15)):
            Circle(CROQUIS35_R)
    cortar_extruir8 = extrude(amount=-CORTAR_EXTRUIR8_DEPTH, mode=Mode.SUBTRACT)

    # Simetría3: Cortar-Extruir8 across plane
    add(cortar_extruir8.mirror(Plane(origin=(0, 0, 0), x_dir=(0, 0, 1), z_dir=(1, 0, 0))), mode=Mode.SUBTRACT)

    # Croquis41 → Cortar-Extruir10 (cut, two sides: drawn at the far end of the back side and taken through both)
    with BuildSketch(Plane.XZ.offset(15.5).offset(-CORTAR_EXTRUIR10_DEPTH_BACK)):
        with Locations(Location((0, 73.164527675, 0), (0, 0, 180))):
            Circle(CROQUIS41_R)
    extrude(amount=CORTAR_EXTRUIR10_DEPTH + CORTAR_EXTRUIR10_DEPTH_BACK, mode=Mode.SUBTRACT)

    # Cortar-Extruir19: up to this cylinder (the profile starts outside it)
    cortar_extruir19_end = Plane(origin=(0, 0, 0), z_dir=(0, -1, 0)) * Cylinder(CORTAR_EXTRUIR19_END_RADIUS, 635.29, mode=Mode.PRIVATE)
    # Croquis56 → Cortar-Extruir19 (cut, up to the surface)
    with BuildSketch(Plane(origin=(79.674337148, 0, 46), x_dir=(-0.4999999999999977, 0, 0.8660254037844399), z_dir=(-0.8660254037844399, 0, -0.4999999999999977)), mode=Mode.PRIVATE) as cortar_extruir19_sk1:
        Rectangle(CROQUIS56_W, CROQUIS56_H)
    cortar_extruir19_tool1 = extrude(cortar_extruir19_sk1.sketch, amount=CORTAR_EXTRUIR19_REACH, mode=Mode.PRIVATE) - cortar_extruir19_end
    add(cortar_extruir19_tool1.solids().sort_by_distance((79.674337, 0, 46))[0], mode=Mode.SUBTRACT)

    # Croquis69 → Saliente-Extruir35 (add)
    with BuildSketch(Plane(origin=(0, 12.5, 0), x_dir=(1, 0, 0), z_dir=(0, 1, 0))):
        with BuildLine():
            Line((23, -99.148648639), (23, -89.078616963))
            Line((23, -89.078616963), (34.15, -85.427030266))
            Line((34.15, -85.427030266), (34.15, -92.498648639))
            ThreePointArc((34.15, -92.498648639), (32.202260095, -97.200908734), (27.5, -99.148648639))
            Line((27.5, -99.148648639), (23, -99.148648639))
        make_face()
        with Locations(Location((27.5, -92.498648639, 0), (0, 0, 270))):
            Circle(CROQUIS69_R, mode=Mode.SUBTRACT)
    extrude(amount=-SALIENTE_EXTRUIR35_DEPTH)

    # Croquis71 → Saliente-Extruir37 (add)
    with BuildSketch(Plane(origin=(0, 12.5, 0), x_dir=(1, 0, 0), z_dir=(0, 1, 0))):
        with BuildLine():
            Line((-74.966599841, -102.204109388), (-77.966599841, -104.799777283))
            Line((-77.966599841, -104.799777283), (-77.966599841, -48.838604701))
            ThreePointArc((-77.966599841, -48.838604701), (-76.499557941, -51.105945201), (-74.966599841, -53.329250025))
            Line((-74.966599841, -53.329250025), (-74.966599841, -102.204109388))
        make_face()
    extrude(amount=-SALIENTE_EXTRUIR37_DEPTH)

    # Croquis72 → Saliente-Extruir38 (add)
    with BuildSketch(Plane(origin=(0, 12.5, 0), x_dir=(1, 0, 0), z_dir=(0, 1, 0))):
        with BuildLine():
            Line((-47.737994791, -78.645304077), (-74.966599841, -102.204109388))
            Line((-74.966599841, -102.204109388), (-74.966599841, -53.329250025))
            ThreePointArc((-74.966599841, -53.329250025), (-62.644473293, -67.377072998), (-47.737994791, -78.645304077))
        make_face()
    extrude(amount=-SALIENTE_EXTRUIR38_DEPTH)

    # Croquis73 → Saliente-Extruir39 (add)
    with BuildSketch(Plane.XZ.offset(15.5).offset(SALIENTE_EXTRUIR39_START)):
        with BuildLine():
            Line((-74.966599841, 102.204109388), (-74.966599841, 53.329250025))
            ThreePointArc((-74.966599841, 53.329250025), (-62.644473293, 67.377072998), (-47.737994791, 78.645304077))
            Line((-47.737994791, 78.645304077), (-74.966599841, 102.204109388))
        make_face()
    extrude(amount=SALIENTE_EXTRUIR39_DEPTH)

    # Croquis76 → Saliente-Extruir40 (add)
    with BuildSketch(Plane(origin=(0, 12.5, 0), x_dir=(1, 0, 0), z_dir=(0, 1, 0))):
        with BuildLine():
            Line((-71.316599841, -85.848648639), (-74.966599841, -85.848648639))
            Line((-74.966599841, -85.848648639), (-74.966599841, -102.204109388))
            Line((-74.966599841, -102.204109388), (-64.666599841, -93.292316285))
            Line((-64.666599841, -93.292316285), (-64.666599841, -92.498648639))
            ThreePointArc((-64.666599841, -92.498648639), (-66.614339746, -87.796388544), (-71.316599841, -85.848648639))
        make_face()
    extrude(amount=-SALIENTE_EXTRUIR40_DEPTH)

    # Croquis74 → Cortar-Extruir22 (cut, through all)
    with BuildSketch(Plane(origin=(0, 12.5, 0), x_dir=(1, 0, 0), z_dir=(0, 1, 0))):
        with Locations(Location((-71.316599841, -92.498648639, 0), (0, 0, 270))):
            Circle(CROQUIS74_R)
    extrude(amount=-CORTAR_EXTRUIR22_DEPTH, mode=Mode.SUBTRACT)

    # Croquis77 → Cortar-Extruir23 (cut)
    with BuildSketch(Plane.XZ.offset(15.5)):
        Polygon((25.479274058, 88.998648639), (29.520725942, 88.998648639), (31.541451884, 92.498648639), (29.520725942, 95.998648639), (25.479274058, 95.998648639), (23.458548116, 92.498648639), align=None)
        Polygon((-69.295873899, 88.998648639), (-67.275147957, 92.498648639), (-69.295873899, 95.998648639), (-73.337325783, 95.998648639), (-75.358051726, 92.498648639), (-73.337325783, 88.998648639), align=None)
    extrude(amount=-CORTAR_EXTRUIR23_DEPTH, mode=Mode.SUBTRACT)


with BuildPart() as body_7_2:
    # Croquis37 → Saliente-Extruir18 (new body)
    with BuildSketch(Plane.XZ.offset(15.5)):
        with Locations((-13.15, 30.15)):
            Circle(CROQUIS37_R)
        with Locations((-13.15, 30.15)):
            Circle(CROQUIS37_R_2, mode=Mode.SUBTRACT)
    extrude(amount=SALIENTE_EXTRUIR18_DEPTH)


with BuildPart() as body_8_2:
    # Simetría5: mirrored copy
    add(body_7_2.part.mirror(Plane(origin=(0, 0, 0), x_dir=(0, 0, 1), z_dir=(1, 0, 0))))


with BuildPart() as cortar_extruir14_piece_1:
    # of the separate pieces the step leaves, piece 1, a body of its own (cortar_extruir14_pieces)
    add(body_5.part.solids().sort_by_distance((3.5, -15.5, 68.141130502))[0])


with BuildPart() as cortar_extruir14_piece_2:
    # of the separate pieces the step leaves, piece 2, a body of its own (cortar_extruir14_pieces)
    add(body_5.part.solids().sort_by_distance((-3.5, -15.5, 68.291130502))[0])


with BuildPart() as body_10:
    # Croquis46 → Saliente-Extruir22 (new body)
    with BuildSketch(Plane.XZ.offset(15.5)):
        with BuildLine():
            Line((6.95, 30.15), (6.95, 24.15))
            Line((6.95, 24.15), (5.15, 24.15))
            Line((5.15, 24.15), (5.15, 30.15))
            ThreePointArc((5.15, 30.15), (13.15, 38.15), (21.15, 30.15))
            Line((21.15, 30.15), (21.15, 24.15))
            Line((21.15, 24.15), (19.35, 24.15))
            Line((19.35, 24.15), (19.35, 30.15))
            ThreePointArc((19.35, 30.15), (13.15, 36.35), (6.95, 30.15))
        make_face()
    extrude(amount=SALIENTE_EXTRUIR22_DEPTH)


with BuildPart() as body_11:
    # Croquis48 → Saliente-Extruir23 (new body)
    with BuildSketch(Plane.XZ.offset(18.8)):
        with BuildLine():
            Line((5.15, 30.15), (5.15, 24.15))
            Line((5.15, 24.15), (21.15, 24.15))
            Line((21.15, 24.15), (21.15, 30.15))
            ThreePointArc((21.15, 30.15), (13.15, 38.15), (5.15, 30.15))
        make_face()
    extrude(amount=SALIENTE_EXTRUIR23_DEPTH)

    # Croquis50 → Cortar-Extruir15 (cut)
    with BuildSketch(Plane.XZ.offset(23.8)):
        Polygon((15.170725942, 26.65), (17.191451884, 30.15), (15.170725942, 33.65), (11.129274058, 33.65), (9.108548116, 30.15), (11.129274058, 26.65), align=None)
    extrude(amount=-CORTAR_EXTRUIR15_DEPTH, mode=Mode.SUBTRACT)


with BuildPart() as body_12:
    # Simetría11 outline → Simetría11 (new body)
    with BuildSketch(Plane(origin=(0, 0, 0), x_dir=(1, 0, 0), z_dir=(0, 1, 0)).offset(SIMETR_A11_START)):
        with BuildLine():
            ThreePointArc((-6.95, -30.15), (-13.15, -36.35), (-19.35, -30.15))
            Line((-19.35, -30.15), (-19.35, -24.15))
            Line((-19.35, -24.15), (-21.15, -24.15))
            Line((-21.15, -24.15), (-21.15, -30.15))
            ThreePointArc((-21.15, -30.15), (-13.15, -38.15), (-5.15, -30.15))
            Line((-5.15, -30.15), (-5.15, -24.15))
            Line((-5.15, -24.15), (-6.95, -24.15))
            Line((-6.95, -24.15), (-6.95, -30.15))
        make_face()
    extrude(amount=SIMETR_A11_DEPTH)


with BuildPart() as body_13:
    # Simetr_a11 2 outline → Simetr_a11 2 (new body)
    with BuildSketch(Plane(origin=(0, 0, 0), x_dir=(1, 0, 0), z_dir=(0, 1, 0)).offset(SIMETR_A11_START_2)):
        with BuildLine():
            Line((-21.15, -24.15), (-21.15, -30.15))
            ThreePointArc((-21.15, -30.15), (-13.15, -38.15), (-5.15, -30.15))
            Line((-5.15, -30.15), (-5.15, -24.15))
            Line((-5.15, -24.15), (-21.15, -24.15))
        make_face()
        Polygon((-15.170725942, -26.65), (-11.129274058, -26.65), (-9.108548116, -30.15), (-11.129274058, -33.65), (-15.170725942, -33.65), (-17.191451884, -30.15), align=None, mode=Mode.SUBTRACT)
    extrude(amount=SIMETR_A11_2_DEPTH)

    # Simetr_a11 3 outline → Simetr_a11 3 (add)
    with BuildSketch(Plane(origin=(0, 0, 0), x_dir=(1, 0, 0), z_dir=(0, 1, 0)).offset(SIMETR_A11_START_3)):
        Polygon((-9.108548116, -30.15), (-11.129274058, -26.65), (-15.170725942, -26.65), (-17.191451884, -30.15), (-15.170725942, -33.65), (-11.129274058, -33.65), align=None)
    extrude(amount=SIMETR_A11_3_DEPTH)


with BuildPart() as body_14:
    # Croquis51 → Saliente-Extruir24 (new body)
    with BuildSketch(Plane.XZ.offset(15.5)):
        with BuildLine():
            Line((3.5, 68.107601731), (3.5, 65.97078039))
            ThreePointArc((3.5, 65.97078039), (0, 81.164527675), (-3.5, 65.97078039))
            Line((-3.5, 65.97078039), (-3.5, 68.107601731))
            ThreePointArc((-3.5, 68.107601731), (0, 79.314527675), (3.5, 68.107601731))
        make_face()
    extrude(amount=SALIENTE_EXTRUIR24_DEPTH)


with BuildPart() as body_15:
    # Croquis53 → Saliente-Extruir25 (new body)
    with BuildSketch(Plane.XZ.offset(18.8)):
        with Locations((0, 73.164527675)):
            Circle(CROQUIS53_R)
    extrude(amount=SALIENTE_EXTRUIR25_DEPTH)

    # Croquis54 → Cortar-Extruir16 (cut)
    with BuildSketch(Plane.XZ.offset(23.8)):
        Polygon((2.020725942, 69.664527675), (4.041451884, 73.164527675), (2.020725942, 76.664527675), (-2.020725942, 76.664527675), (-4.041451884, 73.164527675), (-2.020725942, 69.664527675), align=None)
    extrude(amount=-CORTAR_EXTRUIR16_DEPTH, mode=Mode.SUBTRACT)


with BuildPart() as cortar_extruir18_tool:
    # Croquis55 → Cortar-Extruir18 (new, through all)
    with BuildSketch(Plane.XZ.offset(15.5)):
        with Locations(Location((13.15, 30.15, 0), (0, 0, 180))):
            Circle(CROQUIS55_R)
        with Locations((0, 73.164527675)):
            Circle(CROQUIS55_R)
        with Locations((-13.15, 30.15)):
            Circle(CROQUIS55_R)
    extrude(amount=CORTAR_EXTRUIR18_DEPTH)


with BuildPart() as body_11_1:
    add(body_11.part)

    # Cortar-Extruir18: cut by cortar_extruir18_tool
    add(cortar_extruir18_tool.part, mode=Mode.SUBTRACT)


with BuildPart() as body_13_1:
    add(body_13.part)

    # Cortar-Extruir18: cut by cortar_extruir18_tool
    add(cortar_extruir18_tool.part, mode=Mode.SUBTRACT)


with BuildPart() as body_15_1:
    add(body_15.part)

    # Cortar-Extruir18: cut by cortar_extruir18_tool
    add(cortar_extruir18_tool.part, mode=Mode.SUBTRACT)


with BuildPart() as body_5_2:
    # Croquis79 → Saliente-Extruir41 (new body)
    with BuildSketch(Plane.XZ.offset(15.5)):
        with BuildLine():
            Line((34.15, 85.427030266), (34.15, 92.498648639))
            ThreePointArc((34.15, 92.498648639), (32.202260095, 97.200908734), (27.5, 99.148648639))
            Line((27.5, 99.148648639), (23, 99.148648639))
            Line((23, 99.148648639), (23, 106.428644381))
            Line((23, 106.428644381), (-24.458364465, 137.248466626))
            Line((-24.458364465, 137.248466626), (-77.966599841, 137.248466626))
            Line((-77.966599841, 137.248466626), (-77.966599841, 48.838604701))
            ThreePointArc((-77.966599841, 48.838604701), (-86.951545733, -30.057090587), (-31.161904883, -86.561744923))
            Line((-31.161904883, -86.561744923), (-31.161904883, -93.338095117))
            ThreePointArc((-31.161904883, -93.338095117), (-29.210678119, -98.048773235), (-24.5, -100))
            Line((-24.5, -100), (24.5, -100))
            ThreePointArc((24.5, -100), (29.210678119, -98.048773235), (31.161904883, -93.338095117))
            Line((31.161904883, -93.338095117), (31.161904883, -86.561744923))
            ThreePointArc((31.161904883, -86.561744923), (91.986118124, -1.598146565), (34.15, 85.427030266))
        make_face()
        with Locations((24.5, -93.338095117)):
            Circle(CROQUIS79_R, mode=Mode.SUBTRACT)
        with Locations((-24.5, -93.338095117)):
            Circle(CROQUIS79_R, mode=Mode.SUBTRACT)
        with Locations((27.5, 92.498648639)):
            Circle(CROQUIS79_R, mode=Mode.SUBTRACT)
        with Locations((-71.316599841, 92.498648639)):
            Circle(CROQUIS79_R, mode=Mode.SUBTRACT)
    extrude(amount=-SALIENTE_EXTRUIR41_DEPTH)

    # Croquis81 → Saliente-Extruir43 (add)
    with BuildSketch(Plane(origin=(0, -13.5, 0), x_dir=(1, 0, 0), z_dir=(0, 1, 0))):
        with Locations((-52.466599841, -122.248466626)):
            Circle(CROQUIS81_R)
    extrude(amount=SALIENTE_EXTRUIR43_DEPTH)

    # Croquis82 → Cortar-Extruir24 (cut)
    with BuildSketch(Plane(origin=(0, -13.5, 0), x_dir=(1, 0, 0), z_dir=(0, 1, 0))):
        with Locations(Location((0, 0, 0), (0, 0, 180))):
            Circle(CROQUIS82_R)
    extrude(amount=-CORTAR_EXTRUIR24_DEPTH, mode=Mode.SUBTRACT)


solid = body_5_2.part
